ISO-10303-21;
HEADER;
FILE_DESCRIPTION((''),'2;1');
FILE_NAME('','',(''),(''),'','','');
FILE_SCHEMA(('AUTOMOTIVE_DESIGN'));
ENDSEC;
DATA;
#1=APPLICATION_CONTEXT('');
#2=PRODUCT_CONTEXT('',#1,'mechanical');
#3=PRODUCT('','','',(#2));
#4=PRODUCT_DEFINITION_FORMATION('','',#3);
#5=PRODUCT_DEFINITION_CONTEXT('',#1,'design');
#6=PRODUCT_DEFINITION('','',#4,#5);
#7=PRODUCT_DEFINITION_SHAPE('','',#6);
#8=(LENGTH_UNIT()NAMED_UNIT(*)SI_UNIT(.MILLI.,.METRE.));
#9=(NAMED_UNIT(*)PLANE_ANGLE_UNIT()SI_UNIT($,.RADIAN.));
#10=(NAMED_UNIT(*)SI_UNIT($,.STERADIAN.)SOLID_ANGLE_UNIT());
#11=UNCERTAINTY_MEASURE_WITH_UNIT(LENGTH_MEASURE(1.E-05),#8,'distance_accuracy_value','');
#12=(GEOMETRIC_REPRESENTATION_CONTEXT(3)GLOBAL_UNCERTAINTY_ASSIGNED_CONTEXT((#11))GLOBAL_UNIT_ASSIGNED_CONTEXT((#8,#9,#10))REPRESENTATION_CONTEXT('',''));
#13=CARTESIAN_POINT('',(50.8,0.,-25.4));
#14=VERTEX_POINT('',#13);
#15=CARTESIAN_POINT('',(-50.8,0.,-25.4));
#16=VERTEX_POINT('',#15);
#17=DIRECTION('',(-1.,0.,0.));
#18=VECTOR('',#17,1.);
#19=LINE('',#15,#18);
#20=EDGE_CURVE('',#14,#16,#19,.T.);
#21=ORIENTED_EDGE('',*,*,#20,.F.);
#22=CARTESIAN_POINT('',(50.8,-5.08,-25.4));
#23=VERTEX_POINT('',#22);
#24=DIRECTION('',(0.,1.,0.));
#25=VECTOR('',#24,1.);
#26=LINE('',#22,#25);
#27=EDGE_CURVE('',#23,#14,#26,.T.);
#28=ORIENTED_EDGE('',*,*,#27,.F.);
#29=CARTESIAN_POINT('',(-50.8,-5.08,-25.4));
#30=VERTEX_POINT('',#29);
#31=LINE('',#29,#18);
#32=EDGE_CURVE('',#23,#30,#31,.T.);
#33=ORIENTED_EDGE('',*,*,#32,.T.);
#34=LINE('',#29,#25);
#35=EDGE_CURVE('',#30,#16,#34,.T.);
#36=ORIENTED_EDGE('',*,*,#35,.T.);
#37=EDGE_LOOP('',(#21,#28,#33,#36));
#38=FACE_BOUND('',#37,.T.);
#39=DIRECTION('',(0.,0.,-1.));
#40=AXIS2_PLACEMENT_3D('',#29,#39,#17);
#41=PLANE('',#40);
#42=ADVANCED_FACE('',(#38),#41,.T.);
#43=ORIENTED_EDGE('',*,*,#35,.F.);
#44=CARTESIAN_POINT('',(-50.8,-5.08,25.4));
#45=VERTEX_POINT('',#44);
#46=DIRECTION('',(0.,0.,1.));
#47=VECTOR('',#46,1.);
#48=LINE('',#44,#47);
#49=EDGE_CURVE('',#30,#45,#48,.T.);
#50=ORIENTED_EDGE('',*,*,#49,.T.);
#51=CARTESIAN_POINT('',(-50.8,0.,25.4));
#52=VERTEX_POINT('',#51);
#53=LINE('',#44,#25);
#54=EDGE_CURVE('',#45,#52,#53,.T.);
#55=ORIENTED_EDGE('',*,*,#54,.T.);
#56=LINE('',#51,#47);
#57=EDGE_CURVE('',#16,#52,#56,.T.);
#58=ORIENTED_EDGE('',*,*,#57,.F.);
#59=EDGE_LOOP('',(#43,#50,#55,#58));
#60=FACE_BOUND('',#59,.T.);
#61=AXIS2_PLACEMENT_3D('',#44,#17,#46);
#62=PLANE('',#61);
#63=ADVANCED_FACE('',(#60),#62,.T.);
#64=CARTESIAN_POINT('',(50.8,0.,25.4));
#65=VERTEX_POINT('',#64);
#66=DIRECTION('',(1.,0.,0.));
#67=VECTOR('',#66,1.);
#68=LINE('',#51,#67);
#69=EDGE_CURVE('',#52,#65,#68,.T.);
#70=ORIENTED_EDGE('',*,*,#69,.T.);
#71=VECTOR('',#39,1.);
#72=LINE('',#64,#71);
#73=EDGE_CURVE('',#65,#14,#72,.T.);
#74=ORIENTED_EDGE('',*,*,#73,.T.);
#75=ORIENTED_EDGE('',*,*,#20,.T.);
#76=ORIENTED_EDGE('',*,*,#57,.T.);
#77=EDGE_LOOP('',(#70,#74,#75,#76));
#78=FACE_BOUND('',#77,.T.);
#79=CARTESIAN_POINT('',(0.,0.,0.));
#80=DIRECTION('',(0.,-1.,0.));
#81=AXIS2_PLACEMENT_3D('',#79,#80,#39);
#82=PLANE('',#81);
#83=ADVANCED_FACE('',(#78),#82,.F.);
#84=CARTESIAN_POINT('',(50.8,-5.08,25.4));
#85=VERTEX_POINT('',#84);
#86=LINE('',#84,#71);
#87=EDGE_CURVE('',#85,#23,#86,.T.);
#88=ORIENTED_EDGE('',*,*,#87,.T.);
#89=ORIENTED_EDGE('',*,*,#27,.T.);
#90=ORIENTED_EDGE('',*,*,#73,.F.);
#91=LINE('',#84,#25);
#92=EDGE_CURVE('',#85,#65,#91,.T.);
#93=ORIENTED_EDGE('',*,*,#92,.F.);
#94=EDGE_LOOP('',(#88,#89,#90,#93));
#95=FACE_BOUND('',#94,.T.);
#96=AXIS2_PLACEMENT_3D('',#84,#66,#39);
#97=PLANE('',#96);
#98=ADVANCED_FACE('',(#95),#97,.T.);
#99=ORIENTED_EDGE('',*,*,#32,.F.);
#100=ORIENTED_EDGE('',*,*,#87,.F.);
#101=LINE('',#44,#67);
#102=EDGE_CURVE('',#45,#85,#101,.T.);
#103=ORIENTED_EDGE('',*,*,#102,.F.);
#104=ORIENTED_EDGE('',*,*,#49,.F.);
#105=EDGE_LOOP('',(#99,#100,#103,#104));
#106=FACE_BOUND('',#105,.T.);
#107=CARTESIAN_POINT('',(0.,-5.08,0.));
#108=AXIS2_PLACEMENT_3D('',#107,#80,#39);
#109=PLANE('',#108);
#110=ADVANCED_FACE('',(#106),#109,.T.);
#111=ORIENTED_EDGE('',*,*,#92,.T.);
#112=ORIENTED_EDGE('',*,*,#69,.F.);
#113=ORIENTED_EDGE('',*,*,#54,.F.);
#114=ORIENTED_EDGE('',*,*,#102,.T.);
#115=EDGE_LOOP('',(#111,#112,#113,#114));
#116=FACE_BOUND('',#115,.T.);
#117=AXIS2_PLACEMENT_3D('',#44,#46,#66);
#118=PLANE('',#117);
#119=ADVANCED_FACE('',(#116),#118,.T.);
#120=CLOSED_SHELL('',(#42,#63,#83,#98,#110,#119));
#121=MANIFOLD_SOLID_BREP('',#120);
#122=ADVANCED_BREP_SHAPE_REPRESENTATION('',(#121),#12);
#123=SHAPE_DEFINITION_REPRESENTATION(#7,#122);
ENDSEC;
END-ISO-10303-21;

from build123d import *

# Parameters (mm, degrees)
SKETCH1_W          = 101.6
SKETCH1_H          = 50.8
BASE_FLANGE1_DEPTH = 5.08


# Sheet-metal steps are written as plain solids
with BuildPart() as part:
    # Sketch1 → Base-Flange1 (new body)
    with BuildSketch(Plane(origin=(0, 0, 0), x_dir=(1, 0, 0), z_dir=(0, 1, 0))):
        Rectangle(SKETCH1_W, SKETCH1_H)
    extrude(amount=-BASE_FLANGE1_DEPTH)


solid = part.part
